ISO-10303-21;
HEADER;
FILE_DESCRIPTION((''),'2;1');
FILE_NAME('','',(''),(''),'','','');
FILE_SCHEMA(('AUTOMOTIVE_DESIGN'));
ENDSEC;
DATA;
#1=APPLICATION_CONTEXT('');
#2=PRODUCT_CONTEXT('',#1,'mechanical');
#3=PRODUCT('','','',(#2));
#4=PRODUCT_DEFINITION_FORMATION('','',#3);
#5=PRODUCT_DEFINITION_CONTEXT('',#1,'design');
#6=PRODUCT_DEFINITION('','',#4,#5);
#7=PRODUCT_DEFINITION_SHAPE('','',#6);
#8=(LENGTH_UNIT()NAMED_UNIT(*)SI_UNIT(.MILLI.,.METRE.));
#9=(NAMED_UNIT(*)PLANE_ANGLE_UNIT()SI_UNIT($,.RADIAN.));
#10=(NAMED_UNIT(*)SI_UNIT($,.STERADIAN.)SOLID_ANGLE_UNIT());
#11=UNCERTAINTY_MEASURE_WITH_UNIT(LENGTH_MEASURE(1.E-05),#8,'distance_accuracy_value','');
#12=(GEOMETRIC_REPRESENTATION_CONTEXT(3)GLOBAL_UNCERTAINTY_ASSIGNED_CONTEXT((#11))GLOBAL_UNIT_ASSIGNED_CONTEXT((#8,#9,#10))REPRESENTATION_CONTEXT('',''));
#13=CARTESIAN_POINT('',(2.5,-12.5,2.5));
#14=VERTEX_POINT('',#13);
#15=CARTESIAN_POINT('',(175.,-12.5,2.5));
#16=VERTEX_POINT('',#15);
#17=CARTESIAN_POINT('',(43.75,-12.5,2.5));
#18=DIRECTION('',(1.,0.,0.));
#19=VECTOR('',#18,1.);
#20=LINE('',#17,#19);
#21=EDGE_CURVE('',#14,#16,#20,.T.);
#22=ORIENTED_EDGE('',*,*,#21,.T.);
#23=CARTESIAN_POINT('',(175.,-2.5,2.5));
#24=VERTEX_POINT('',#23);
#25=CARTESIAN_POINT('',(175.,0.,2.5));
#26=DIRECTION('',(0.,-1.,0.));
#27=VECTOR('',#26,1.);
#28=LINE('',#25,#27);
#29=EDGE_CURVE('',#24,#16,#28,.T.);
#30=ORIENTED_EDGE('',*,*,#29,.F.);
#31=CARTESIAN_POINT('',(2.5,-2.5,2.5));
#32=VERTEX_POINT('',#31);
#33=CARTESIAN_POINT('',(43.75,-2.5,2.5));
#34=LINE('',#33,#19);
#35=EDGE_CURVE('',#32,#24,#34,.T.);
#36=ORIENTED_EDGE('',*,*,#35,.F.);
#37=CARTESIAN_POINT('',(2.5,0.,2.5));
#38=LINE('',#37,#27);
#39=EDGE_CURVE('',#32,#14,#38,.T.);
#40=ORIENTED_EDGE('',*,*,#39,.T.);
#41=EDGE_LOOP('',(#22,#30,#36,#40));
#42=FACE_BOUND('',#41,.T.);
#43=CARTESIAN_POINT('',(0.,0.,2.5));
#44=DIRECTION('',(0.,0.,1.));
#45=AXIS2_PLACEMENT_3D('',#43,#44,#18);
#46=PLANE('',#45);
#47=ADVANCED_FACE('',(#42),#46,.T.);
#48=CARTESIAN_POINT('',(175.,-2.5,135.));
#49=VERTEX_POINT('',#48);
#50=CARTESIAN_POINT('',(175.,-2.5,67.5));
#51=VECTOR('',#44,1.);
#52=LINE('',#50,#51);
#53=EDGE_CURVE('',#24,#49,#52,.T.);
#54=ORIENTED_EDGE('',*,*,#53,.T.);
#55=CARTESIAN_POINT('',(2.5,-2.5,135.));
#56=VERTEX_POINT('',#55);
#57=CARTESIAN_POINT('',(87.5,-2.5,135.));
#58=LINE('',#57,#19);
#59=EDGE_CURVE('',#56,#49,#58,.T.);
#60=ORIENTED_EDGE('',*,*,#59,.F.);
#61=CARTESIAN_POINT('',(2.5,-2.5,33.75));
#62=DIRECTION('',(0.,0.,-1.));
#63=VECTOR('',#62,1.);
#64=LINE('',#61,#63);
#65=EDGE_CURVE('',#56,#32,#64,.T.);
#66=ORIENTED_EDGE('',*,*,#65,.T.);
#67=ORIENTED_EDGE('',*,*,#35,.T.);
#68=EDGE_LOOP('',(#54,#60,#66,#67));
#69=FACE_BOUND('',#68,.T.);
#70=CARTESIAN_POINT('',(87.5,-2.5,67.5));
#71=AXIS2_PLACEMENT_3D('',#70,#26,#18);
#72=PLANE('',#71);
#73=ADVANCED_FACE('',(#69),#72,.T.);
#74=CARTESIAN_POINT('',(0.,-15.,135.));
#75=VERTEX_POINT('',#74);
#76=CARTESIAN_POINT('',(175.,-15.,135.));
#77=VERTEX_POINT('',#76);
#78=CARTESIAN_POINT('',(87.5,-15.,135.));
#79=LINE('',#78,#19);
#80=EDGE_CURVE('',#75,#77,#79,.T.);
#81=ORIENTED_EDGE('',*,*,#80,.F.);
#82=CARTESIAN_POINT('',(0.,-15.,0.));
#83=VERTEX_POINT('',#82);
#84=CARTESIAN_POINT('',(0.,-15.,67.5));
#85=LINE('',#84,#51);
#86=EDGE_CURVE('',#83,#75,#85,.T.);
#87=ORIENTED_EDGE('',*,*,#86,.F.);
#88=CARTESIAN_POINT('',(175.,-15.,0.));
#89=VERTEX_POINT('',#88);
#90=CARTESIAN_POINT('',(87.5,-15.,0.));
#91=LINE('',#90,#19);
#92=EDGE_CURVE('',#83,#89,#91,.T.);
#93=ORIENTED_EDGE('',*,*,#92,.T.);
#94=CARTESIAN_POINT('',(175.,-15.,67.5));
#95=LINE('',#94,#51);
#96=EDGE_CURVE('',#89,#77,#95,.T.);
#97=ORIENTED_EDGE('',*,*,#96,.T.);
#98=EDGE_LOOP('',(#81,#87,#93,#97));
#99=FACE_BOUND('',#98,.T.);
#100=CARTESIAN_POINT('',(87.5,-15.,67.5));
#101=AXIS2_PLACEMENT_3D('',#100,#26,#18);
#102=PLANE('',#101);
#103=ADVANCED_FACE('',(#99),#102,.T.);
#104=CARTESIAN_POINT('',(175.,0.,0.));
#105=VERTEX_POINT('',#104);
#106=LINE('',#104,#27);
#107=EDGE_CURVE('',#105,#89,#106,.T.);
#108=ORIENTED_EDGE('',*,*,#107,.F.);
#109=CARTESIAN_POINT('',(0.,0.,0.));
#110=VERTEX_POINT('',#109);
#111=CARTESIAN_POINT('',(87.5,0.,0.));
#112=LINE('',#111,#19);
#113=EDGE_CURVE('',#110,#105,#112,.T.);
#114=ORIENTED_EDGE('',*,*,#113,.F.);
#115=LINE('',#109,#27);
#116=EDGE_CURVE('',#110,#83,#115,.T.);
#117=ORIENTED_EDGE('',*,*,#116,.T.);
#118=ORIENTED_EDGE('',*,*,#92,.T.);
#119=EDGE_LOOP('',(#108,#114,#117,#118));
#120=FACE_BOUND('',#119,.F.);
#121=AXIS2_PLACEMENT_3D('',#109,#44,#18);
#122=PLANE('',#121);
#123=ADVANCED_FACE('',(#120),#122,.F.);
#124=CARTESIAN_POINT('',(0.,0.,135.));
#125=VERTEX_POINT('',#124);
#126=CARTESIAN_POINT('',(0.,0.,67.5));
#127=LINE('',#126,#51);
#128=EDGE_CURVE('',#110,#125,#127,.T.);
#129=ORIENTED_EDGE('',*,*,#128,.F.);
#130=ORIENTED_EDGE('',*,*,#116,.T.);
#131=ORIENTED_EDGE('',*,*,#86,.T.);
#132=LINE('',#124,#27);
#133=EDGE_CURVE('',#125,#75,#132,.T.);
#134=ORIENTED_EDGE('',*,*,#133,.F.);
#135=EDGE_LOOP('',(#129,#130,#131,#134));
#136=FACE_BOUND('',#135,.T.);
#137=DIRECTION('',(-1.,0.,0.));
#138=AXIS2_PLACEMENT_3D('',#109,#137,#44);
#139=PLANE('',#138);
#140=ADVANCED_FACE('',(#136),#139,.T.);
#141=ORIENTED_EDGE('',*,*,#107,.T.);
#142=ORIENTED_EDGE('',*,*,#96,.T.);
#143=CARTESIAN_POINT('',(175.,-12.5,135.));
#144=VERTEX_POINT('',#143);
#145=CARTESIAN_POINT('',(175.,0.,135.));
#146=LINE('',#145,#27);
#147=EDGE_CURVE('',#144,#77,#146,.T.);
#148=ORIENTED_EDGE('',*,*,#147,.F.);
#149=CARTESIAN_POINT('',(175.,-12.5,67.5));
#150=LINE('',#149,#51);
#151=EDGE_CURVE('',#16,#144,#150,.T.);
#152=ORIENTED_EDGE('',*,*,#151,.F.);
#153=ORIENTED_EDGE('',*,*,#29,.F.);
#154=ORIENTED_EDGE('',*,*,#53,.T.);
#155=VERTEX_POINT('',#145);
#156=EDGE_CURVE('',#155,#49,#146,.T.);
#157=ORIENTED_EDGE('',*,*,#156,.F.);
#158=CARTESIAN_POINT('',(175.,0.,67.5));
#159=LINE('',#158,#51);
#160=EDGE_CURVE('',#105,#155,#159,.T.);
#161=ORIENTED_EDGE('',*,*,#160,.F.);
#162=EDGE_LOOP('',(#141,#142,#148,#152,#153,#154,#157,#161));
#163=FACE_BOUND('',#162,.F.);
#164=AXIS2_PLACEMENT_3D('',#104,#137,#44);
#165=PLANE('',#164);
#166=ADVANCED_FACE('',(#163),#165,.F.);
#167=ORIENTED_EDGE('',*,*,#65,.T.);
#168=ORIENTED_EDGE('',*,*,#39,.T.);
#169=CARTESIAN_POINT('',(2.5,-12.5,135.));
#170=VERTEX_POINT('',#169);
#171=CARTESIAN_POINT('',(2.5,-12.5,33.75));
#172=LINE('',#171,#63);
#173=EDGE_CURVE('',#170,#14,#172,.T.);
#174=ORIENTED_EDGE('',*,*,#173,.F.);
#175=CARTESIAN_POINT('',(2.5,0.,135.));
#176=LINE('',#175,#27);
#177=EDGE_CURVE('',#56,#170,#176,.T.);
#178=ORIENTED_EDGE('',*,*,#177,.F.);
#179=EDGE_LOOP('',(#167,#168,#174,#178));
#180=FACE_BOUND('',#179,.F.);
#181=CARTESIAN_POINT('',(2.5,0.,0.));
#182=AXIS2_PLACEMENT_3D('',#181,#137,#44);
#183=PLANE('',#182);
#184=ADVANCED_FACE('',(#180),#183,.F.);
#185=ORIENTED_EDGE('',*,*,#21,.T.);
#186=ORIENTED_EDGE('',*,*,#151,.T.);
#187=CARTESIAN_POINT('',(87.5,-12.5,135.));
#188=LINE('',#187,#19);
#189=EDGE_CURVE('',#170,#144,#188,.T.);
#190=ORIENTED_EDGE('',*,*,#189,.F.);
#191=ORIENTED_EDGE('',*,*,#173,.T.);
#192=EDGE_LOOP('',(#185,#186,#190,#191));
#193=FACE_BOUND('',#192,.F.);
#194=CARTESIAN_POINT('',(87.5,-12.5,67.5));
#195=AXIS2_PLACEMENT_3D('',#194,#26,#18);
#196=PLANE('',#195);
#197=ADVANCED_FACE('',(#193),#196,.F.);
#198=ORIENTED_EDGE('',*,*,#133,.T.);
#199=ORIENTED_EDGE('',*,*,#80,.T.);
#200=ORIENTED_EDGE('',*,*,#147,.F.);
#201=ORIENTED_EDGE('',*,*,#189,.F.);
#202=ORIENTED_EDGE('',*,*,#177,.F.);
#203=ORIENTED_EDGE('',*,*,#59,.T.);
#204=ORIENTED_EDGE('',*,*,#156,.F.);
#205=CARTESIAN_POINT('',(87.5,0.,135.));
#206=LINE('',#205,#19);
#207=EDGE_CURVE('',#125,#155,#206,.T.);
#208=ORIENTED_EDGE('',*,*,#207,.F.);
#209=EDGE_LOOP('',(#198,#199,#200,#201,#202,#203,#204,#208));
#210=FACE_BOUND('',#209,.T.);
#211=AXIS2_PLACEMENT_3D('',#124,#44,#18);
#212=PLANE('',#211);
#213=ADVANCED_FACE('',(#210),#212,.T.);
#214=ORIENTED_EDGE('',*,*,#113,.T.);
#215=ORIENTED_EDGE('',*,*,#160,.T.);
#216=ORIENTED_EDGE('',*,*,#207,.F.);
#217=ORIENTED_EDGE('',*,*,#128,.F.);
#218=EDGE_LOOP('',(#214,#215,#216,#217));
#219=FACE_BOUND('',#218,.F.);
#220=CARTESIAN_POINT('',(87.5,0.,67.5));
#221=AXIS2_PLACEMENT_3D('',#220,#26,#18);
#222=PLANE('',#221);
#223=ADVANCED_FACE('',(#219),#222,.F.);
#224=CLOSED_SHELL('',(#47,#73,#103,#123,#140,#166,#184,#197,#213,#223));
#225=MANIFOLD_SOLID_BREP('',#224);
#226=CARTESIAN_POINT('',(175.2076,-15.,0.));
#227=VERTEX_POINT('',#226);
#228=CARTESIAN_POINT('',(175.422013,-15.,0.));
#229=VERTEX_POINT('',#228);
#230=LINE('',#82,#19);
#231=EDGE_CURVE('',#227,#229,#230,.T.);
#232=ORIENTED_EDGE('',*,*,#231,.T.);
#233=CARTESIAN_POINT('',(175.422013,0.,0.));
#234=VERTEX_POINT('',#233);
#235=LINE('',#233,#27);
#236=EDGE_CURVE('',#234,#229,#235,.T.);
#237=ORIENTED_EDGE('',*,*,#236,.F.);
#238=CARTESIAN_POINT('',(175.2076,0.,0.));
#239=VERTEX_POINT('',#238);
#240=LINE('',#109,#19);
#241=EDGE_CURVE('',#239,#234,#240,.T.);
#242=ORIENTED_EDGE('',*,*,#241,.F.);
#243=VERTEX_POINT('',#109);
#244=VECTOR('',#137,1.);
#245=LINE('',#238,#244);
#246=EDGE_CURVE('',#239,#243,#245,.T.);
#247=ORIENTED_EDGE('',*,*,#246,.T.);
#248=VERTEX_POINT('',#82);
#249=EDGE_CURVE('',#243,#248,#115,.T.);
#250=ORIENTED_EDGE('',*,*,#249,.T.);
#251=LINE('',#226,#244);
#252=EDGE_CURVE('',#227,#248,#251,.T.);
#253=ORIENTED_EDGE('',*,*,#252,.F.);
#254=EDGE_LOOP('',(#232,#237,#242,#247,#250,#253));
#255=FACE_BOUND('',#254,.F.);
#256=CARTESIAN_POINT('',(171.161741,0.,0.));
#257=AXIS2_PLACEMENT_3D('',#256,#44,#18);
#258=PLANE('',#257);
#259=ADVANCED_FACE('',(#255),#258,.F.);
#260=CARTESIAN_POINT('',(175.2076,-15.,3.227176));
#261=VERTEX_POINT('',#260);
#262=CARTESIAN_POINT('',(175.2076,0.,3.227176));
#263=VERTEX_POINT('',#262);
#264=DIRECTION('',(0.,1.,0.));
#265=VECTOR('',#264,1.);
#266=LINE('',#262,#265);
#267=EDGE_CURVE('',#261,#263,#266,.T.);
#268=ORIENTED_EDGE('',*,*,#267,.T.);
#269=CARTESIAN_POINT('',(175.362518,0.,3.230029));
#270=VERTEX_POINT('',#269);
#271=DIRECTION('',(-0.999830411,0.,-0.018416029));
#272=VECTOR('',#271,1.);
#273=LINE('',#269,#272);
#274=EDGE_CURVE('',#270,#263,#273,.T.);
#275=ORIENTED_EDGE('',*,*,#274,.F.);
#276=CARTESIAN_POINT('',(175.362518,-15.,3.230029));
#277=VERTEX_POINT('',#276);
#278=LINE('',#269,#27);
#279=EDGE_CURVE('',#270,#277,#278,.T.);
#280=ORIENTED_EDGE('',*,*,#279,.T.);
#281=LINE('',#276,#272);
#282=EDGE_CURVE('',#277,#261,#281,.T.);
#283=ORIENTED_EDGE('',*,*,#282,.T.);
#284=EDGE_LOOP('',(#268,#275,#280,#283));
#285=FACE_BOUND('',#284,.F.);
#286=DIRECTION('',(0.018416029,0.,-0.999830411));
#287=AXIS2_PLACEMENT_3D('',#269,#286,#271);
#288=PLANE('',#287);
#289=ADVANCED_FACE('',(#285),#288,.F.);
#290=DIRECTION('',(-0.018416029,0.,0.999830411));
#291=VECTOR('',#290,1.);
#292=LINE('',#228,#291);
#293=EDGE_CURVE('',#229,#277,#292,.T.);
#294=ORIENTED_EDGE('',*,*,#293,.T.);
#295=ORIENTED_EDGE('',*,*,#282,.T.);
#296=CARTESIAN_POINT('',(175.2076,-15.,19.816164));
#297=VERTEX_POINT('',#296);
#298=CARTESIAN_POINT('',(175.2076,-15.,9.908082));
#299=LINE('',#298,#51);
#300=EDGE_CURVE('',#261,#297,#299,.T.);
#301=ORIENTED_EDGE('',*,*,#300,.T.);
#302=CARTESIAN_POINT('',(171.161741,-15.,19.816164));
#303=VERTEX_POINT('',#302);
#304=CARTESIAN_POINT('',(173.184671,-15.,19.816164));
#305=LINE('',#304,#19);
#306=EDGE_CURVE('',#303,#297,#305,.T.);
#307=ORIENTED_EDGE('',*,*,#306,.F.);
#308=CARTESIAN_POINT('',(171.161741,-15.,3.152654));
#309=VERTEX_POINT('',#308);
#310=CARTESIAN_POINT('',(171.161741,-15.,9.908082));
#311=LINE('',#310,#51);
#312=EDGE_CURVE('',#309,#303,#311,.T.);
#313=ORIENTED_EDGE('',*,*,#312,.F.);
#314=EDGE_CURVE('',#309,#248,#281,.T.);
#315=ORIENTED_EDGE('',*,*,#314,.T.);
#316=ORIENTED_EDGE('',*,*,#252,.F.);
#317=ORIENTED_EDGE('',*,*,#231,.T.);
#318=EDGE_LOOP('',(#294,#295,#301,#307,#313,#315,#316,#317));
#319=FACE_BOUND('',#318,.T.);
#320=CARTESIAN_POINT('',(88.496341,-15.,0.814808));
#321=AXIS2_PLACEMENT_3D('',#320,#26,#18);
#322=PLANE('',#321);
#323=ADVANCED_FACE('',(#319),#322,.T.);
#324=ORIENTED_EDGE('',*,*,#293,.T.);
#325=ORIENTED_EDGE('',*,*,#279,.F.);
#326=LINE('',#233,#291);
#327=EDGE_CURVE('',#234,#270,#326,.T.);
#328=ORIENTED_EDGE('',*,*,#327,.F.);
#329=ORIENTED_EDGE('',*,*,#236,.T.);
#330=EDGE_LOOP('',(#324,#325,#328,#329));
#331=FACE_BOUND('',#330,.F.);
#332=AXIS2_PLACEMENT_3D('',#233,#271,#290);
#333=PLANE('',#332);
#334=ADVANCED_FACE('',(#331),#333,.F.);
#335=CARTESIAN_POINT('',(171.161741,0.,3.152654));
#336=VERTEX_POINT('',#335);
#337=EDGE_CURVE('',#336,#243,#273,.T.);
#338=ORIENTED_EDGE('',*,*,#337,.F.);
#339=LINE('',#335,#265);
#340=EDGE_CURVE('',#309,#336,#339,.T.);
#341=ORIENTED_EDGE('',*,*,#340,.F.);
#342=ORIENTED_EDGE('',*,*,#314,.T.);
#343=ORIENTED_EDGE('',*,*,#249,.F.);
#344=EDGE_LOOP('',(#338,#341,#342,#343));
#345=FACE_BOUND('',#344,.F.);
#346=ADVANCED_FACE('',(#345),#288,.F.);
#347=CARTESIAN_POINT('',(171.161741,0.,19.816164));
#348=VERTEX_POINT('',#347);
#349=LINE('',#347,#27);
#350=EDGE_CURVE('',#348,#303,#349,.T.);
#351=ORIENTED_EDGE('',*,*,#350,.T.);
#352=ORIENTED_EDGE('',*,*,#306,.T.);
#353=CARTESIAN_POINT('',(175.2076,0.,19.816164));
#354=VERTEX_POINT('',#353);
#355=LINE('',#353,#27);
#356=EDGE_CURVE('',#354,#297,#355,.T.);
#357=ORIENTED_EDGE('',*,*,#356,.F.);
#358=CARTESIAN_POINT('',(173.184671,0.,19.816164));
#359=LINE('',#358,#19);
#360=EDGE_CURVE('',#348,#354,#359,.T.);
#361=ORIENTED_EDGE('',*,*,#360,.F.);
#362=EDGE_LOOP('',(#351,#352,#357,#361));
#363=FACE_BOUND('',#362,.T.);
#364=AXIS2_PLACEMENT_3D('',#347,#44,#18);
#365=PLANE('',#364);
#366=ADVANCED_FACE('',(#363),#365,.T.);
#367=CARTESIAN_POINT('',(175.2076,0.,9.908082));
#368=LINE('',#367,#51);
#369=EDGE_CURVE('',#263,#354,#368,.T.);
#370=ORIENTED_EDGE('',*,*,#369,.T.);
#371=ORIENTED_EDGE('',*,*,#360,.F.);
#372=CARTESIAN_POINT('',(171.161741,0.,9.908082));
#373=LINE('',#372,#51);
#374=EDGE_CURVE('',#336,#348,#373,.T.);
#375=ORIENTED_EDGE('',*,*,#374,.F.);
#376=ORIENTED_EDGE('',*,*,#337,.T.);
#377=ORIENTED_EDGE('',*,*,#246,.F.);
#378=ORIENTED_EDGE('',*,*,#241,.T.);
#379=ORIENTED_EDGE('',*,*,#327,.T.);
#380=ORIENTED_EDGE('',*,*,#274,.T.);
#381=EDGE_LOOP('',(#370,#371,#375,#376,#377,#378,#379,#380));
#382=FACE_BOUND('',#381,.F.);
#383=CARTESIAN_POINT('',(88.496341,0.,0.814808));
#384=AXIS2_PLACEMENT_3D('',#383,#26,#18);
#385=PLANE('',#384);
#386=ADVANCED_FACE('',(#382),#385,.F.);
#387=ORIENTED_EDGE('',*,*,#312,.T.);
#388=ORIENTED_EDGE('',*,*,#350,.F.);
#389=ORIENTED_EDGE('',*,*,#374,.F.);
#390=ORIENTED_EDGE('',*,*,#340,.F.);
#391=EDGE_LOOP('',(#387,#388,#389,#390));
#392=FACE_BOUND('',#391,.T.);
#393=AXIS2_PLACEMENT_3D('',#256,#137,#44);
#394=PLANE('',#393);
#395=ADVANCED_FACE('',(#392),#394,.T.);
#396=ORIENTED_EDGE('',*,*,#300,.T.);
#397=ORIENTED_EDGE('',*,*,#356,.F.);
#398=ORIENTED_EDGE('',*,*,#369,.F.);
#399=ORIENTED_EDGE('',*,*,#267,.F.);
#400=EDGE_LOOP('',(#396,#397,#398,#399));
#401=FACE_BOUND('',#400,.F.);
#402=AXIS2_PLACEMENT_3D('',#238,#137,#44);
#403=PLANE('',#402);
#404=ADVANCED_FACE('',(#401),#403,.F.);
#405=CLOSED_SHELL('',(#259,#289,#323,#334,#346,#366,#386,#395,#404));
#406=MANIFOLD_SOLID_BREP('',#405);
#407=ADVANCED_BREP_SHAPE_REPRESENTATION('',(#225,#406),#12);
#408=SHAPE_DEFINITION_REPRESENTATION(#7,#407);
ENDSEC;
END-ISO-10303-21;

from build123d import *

# Parameters (mm, degrees)
F0_W     = 175
F0_H     = 135
F1_DEPTH = 15
F2_T     = -2.5
F4_DEPTH = 15
F5_W     = 4.0458589792
F5_H     = 19.8161639273
F6_DEPTH = 15


with BuildPart() as f1:
    # F0 (on Front) → F1 (new body)
    with BuildSketch(Plane.XZ):
        with Locations((87.5, 67.5)):
            Rectangle(F0_W, F0_H)
    extrude(amount=F1_DEPTH)

    # F2
    f2_openings = [f1.faces().sort_by_distance(p)[0] for p in [
        (87.5, -7.5, 135),
        (175, -7.5, 67.5),
    ]]
    offset(amount=F2_T, openings=f2_openings)


with BuildPart() as f4:
    # F3 (on Front) → F4 (new body)
    with BuildSketch(Plane.XZ):
        Polygon((175.3625184086, 3.230029002), (0, 0), (175.4220128059, 0), align=None)
    extrude(amount=F4_DEPTH)

    # F5 (on face) → F6 (join)
    with BuildSketch(Plane.XZ):
        with Locations((173.1846705079, 9.9080819637)):
            Rectangle(F5_W, F5_H)
    extrude(amount=F6_DEPTH)


solid = Compound([f1.part, f4.part])
